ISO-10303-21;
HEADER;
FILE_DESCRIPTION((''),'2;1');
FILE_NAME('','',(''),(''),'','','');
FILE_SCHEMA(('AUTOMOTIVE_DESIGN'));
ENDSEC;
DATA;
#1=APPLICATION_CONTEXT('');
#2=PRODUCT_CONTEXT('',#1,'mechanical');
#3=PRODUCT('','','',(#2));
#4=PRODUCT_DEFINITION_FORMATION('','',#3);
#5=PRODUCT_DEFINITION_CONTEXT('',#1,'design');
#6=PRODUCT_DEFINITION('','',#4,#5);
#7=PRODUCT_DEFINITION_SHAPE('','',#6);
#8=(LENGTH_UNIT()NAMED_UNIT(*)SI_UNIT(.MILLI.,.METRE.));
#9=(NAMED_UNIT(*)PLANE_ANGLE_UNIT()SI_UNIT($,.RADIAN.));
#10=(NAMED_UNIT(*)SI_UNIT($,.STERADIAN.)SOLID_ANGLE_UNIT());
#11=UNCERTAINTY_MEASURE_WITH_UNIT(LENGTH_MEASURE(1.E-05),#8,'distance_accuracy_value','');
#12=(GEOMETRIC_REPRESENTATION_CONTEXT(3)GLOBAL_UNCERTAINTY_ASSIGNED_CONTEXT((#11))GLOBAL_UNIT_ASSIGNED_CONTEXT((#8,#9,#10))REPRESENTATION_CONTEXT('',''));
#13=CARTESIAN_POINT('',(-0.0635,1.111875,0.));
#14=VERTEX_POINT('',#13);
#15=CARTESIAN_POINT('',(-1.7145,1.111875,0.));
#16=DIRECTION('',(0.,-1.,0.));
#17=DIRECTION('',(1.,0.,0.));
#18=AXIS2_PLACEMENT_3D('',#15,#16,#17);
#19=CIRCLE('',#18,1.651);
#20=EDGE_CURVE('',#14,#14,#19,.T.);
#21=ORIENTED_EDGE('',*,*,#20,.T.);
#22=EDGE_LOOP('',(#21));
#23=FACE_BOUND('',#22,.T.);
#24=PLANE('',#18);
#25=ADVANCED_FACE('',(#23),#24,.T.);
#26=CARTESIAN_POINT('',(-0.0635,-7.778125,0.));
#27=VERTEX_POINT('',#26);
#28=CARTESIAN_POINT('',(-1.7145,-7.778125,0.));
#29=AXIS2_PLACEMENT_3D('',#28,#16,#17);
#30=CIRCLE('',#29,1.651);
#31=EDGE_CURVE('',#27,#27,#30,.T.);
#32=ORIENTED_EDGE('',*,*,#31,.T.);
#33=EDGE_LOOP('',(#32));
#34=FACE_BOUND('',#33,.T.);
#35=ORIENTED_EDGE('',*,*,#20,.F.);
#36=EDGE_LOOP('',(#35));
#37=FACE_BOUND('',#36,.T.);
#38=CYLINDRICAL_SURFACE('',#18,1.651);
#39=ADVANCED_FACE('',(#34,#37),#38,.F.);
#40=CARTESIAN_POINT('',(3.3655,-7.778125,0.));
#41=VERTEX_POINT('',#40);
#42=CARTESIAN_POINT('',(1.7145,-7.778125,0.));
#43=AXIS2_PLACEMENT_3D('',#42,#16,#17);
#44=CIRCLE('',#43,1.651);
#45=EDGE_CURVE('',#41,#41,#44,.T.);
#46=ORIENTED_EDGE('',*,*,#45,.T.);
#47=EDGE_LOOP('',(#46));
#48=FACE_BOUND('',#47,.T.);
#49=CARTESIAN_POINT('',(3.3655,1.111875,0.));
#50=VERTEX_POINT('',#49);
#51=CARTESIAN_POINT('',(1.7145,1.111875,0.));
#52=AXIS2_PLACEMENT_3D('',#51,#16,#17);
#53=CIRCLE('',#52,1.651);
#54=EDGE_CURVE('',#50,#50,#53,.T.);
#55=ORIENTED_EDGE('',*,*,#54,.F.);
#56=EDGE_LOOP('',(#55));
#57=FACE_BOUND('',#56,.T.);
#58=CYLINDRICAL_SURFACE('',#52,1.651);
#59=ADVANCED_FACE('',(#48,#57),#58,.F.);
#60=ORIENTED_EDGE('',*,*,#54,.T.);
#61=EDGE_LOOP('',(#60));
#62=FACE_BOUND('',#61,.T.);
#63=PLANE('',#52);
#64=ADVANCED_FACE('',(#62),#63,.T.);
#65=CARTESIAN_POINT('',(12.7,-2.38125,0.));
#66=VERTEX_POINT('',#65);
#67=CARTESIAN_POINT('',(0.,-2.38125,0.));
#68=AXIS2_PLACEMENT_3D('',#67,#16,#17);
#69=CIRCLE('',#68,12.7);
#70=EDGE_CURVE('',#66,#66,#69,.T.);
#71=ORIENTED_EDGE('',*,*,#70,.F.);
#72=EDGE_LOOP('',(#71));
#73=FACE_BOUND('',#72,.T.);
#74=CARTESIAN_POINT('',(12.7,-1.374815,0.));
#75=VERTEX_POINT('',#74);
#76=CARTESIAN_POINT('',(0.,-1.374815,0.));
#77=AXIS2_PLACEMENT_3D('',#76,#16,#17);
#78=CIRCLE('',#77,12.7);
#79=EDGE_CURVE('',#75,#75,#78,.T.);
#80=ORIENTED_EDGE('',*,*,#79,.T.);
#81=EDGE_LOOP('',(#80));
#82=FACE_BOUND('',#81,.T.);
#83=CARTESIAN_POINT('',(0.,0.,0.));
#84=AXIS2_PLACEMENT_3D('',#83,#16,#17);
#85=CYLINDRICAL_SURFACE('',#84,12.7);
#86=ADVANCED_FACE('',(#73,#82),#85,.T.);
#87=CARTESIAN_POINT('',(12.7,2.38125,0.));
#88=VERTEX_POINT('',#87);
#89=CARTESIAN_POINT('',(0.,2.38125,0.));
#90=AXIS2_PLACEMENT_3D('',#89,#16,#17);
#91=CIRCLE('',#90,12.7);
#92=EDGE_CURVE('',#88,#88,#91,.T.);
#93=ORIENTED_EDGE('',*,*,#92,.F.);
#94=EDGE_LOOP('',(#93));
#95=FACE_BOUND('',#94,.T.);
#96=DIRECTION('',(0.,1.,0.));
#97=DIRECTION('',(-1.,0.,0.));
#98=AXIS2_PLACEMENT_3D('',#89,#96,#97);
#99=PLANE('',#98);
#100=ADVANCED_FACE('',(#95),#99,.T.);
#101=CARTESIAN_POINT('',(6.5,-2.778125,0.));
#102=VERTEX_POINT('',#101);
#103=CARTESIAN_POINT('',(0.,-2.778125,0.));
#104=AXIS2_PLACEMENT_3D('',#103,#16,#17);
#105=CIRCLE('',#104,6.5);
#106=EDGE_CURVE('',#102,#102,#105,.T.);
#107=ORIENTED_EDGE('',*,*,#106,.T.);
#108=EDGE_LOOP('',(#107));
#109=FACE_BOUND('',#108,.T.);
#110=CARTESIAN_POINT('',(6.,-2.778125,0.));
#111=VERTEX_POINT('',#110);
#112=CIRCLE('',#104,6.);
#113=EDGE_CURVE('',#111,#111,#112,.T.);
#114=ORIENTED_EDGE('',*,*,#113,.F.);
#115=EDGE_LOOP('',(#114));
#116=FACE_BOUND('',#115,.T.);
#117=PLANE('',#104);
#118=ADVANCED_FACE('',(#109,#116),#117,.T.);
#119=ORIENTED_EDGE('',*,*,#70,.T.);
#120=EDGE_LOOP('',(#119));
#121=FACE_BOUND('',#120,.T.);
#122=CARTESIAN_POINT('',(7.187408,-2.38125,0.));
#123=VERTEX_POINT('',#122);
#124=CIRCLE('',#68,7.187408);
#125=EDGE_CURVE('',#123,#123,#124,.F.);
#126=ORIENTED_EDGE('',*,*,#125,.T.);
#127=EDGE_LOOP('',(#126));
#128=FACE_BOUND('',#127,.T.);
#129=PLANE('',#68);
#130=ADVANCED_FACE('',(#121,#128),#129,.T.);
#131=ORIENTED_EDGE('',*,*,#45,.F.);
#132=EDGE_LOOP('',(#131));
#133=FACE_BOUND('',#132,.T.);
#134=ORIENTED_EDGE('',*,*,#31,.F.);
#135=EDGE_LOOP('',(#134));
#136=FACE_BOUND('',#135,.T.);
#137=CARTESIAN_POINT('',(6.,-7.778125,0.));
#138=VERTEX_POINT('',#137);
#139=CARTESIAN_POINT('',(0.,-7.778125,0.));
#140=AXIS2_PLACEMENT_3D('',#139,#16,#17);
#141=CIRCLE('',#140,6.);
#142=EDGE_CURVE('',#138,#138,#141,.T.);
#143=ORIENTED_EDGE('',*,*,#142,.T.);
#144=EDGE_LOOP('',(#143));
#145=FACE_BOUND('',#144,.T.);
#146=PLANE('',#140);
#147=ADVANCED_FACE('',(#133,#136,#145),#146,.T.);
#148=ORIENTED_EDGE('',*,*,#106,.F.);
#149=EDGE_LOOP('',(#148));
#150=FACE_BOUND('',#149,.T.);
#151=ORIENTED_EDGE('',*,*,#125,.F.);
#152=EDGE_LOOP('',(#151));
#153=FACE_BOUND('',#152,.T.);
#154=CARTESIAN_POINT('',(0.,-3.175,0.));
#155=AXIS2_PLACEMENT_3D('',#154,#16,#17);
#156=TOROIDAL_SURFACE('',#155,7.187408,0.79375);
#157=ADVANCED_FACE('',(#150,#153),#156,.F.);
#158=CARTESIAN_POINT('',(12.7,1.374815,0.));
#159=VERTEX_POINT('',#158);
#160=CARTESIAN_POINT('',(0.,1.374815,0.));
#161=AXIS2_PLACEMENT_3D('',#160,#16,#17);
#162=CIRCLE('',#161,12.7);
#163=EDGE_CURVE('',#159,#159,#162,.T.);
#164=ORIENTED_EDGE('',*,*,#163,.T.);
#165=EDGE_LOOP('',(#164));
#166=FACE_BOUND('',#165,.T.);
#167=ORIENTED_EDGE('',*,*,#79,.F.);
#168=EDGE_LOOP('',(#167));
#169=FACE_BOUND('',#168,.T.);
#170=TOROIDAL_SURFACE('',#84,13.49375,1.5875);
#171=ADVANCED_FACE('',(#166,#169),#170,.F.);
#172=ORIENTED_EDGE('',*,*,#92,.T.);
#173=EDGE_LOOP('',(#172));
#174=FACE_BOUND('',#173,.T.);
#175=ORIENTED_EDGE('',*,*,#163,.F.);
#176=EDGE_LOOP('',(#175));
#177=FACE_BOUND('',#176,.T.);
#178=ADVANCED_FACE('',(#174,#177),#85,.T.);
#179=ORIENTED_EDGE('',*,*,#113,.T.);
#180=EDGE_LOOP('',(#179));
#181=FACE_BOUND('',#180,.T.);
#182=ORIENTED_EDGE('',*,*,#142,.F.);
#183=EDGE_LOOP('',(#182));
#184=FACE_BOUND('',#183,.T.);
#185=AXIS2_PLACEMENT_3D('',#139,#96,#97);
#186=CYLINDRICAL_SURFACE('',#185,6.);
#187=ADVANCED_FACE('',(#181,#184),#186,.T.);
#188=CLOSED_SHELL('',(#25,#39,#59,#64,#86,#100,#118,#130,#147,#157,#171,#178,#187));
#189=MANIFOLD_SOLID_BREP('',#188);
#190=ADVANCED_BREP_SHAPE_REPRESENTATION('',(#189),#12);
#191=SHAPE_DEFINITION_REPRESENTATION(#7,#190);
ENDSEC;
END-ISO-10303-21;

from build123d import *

# Parameters (mm, degrees)
SKETCH7_R           = 6.5
BOSS_EXTRUDE2_DEPTH = 0.396875
FILLET1_R           = 0.79375
SKETCH6_R           = 6
BOSS_EXTRUDE1_DEPTH = 5
SKETCH5_R           = 1.651
CUT_EXTRUDE3_DEPTH  = 8.89


with BuildPart() as part:
    # Sketch2 → Revolve1 (revolve)
    with BuildSketch(Plane.XY):
        with BuildLine():
            Line((0, 0), (0, -2.38125))
            Line((0, -2.38125), (12.7, -2.38125))
            Line((12.7, -2.38125), (12.7, -1.374815329))
            ThreePointArc((12.7, -1.374815329), (11.90625, 0), (12.7, 1.374815329))
            Line((12.7, 1.374815329), (12.7, 2.38125))
            Line((12.7, 2.38125), (0, 2.38125))
            Line((0, 2.38125), (0, 0))
        make_face()
    revolve(axis=Axis((0, 0, 0), (0, 1, 0)))

    # Sketch7 → Boss-Extrude2 (add)
    with BuildSketch(Plane(origin=(0, -2.38125, 0), x_dir=(-1, 0, 0), z_dir=(0, -1, 0))):
        with Locations(Location((0, 0, 0), (0, 0, 180))):
            Circle(SKETCH7_R)
    extrude(amount=BOSS_EXTRUDE2_DEPTH)

    # Fillet1
    # the kernel refuses this fillet: 0.79375 mm, written as the material it adds along each edge
    with BuildSketch(Plane(origin=(0, -2.38125, 0), x_dir=(1, 0, 0), z_dir=(0, 0, -1))) as fillet1_piece_1:
        with BuildLine():
            CenterArc((7.187407664, 0.79375), FILLET1_R, 210, 60)
            Line((6.5, 0.396875), (6.486251847, 0.3889375))
            ThreePointArc((6.486251847, 0.3889375), (6.484125, 0.1984375), (6.484125, 0))
            Line((6.484125, 0), (6.5, -0.015875))
            Line((6.5, -0.015875), (7.187407664, -0.015875))
            Line((7.187407664, -0.015875), (7.187407664, 0))
        make_face()
    revolve(axis=Axis((0, -2.38125, 0), (0, -1, 0)))

    # Sketch6 → Boss-Extrude1 (add)
    with BuildSketch(Plane.XZ.offset(2.778125)):
        Circle(SKETCH6_R)
    extrude(amount=BOSS_EXTRUDE1_DEPTH)

    # Sketch5 → Cut-Extrude3 (cut)
    with BuildSketch(Plane.XZ.offset(7.778125)):
        with Locations((-1.7145, 0)):
            Circle(SKETCH5_R)
        with Locations((1.7145, 0)):
            Circle(SKETCH5_R)
    extrude(amount=-CUT_EXTRUDE3_DEPTH, mode=Mode.SUBTRACT)


solid = part.part
